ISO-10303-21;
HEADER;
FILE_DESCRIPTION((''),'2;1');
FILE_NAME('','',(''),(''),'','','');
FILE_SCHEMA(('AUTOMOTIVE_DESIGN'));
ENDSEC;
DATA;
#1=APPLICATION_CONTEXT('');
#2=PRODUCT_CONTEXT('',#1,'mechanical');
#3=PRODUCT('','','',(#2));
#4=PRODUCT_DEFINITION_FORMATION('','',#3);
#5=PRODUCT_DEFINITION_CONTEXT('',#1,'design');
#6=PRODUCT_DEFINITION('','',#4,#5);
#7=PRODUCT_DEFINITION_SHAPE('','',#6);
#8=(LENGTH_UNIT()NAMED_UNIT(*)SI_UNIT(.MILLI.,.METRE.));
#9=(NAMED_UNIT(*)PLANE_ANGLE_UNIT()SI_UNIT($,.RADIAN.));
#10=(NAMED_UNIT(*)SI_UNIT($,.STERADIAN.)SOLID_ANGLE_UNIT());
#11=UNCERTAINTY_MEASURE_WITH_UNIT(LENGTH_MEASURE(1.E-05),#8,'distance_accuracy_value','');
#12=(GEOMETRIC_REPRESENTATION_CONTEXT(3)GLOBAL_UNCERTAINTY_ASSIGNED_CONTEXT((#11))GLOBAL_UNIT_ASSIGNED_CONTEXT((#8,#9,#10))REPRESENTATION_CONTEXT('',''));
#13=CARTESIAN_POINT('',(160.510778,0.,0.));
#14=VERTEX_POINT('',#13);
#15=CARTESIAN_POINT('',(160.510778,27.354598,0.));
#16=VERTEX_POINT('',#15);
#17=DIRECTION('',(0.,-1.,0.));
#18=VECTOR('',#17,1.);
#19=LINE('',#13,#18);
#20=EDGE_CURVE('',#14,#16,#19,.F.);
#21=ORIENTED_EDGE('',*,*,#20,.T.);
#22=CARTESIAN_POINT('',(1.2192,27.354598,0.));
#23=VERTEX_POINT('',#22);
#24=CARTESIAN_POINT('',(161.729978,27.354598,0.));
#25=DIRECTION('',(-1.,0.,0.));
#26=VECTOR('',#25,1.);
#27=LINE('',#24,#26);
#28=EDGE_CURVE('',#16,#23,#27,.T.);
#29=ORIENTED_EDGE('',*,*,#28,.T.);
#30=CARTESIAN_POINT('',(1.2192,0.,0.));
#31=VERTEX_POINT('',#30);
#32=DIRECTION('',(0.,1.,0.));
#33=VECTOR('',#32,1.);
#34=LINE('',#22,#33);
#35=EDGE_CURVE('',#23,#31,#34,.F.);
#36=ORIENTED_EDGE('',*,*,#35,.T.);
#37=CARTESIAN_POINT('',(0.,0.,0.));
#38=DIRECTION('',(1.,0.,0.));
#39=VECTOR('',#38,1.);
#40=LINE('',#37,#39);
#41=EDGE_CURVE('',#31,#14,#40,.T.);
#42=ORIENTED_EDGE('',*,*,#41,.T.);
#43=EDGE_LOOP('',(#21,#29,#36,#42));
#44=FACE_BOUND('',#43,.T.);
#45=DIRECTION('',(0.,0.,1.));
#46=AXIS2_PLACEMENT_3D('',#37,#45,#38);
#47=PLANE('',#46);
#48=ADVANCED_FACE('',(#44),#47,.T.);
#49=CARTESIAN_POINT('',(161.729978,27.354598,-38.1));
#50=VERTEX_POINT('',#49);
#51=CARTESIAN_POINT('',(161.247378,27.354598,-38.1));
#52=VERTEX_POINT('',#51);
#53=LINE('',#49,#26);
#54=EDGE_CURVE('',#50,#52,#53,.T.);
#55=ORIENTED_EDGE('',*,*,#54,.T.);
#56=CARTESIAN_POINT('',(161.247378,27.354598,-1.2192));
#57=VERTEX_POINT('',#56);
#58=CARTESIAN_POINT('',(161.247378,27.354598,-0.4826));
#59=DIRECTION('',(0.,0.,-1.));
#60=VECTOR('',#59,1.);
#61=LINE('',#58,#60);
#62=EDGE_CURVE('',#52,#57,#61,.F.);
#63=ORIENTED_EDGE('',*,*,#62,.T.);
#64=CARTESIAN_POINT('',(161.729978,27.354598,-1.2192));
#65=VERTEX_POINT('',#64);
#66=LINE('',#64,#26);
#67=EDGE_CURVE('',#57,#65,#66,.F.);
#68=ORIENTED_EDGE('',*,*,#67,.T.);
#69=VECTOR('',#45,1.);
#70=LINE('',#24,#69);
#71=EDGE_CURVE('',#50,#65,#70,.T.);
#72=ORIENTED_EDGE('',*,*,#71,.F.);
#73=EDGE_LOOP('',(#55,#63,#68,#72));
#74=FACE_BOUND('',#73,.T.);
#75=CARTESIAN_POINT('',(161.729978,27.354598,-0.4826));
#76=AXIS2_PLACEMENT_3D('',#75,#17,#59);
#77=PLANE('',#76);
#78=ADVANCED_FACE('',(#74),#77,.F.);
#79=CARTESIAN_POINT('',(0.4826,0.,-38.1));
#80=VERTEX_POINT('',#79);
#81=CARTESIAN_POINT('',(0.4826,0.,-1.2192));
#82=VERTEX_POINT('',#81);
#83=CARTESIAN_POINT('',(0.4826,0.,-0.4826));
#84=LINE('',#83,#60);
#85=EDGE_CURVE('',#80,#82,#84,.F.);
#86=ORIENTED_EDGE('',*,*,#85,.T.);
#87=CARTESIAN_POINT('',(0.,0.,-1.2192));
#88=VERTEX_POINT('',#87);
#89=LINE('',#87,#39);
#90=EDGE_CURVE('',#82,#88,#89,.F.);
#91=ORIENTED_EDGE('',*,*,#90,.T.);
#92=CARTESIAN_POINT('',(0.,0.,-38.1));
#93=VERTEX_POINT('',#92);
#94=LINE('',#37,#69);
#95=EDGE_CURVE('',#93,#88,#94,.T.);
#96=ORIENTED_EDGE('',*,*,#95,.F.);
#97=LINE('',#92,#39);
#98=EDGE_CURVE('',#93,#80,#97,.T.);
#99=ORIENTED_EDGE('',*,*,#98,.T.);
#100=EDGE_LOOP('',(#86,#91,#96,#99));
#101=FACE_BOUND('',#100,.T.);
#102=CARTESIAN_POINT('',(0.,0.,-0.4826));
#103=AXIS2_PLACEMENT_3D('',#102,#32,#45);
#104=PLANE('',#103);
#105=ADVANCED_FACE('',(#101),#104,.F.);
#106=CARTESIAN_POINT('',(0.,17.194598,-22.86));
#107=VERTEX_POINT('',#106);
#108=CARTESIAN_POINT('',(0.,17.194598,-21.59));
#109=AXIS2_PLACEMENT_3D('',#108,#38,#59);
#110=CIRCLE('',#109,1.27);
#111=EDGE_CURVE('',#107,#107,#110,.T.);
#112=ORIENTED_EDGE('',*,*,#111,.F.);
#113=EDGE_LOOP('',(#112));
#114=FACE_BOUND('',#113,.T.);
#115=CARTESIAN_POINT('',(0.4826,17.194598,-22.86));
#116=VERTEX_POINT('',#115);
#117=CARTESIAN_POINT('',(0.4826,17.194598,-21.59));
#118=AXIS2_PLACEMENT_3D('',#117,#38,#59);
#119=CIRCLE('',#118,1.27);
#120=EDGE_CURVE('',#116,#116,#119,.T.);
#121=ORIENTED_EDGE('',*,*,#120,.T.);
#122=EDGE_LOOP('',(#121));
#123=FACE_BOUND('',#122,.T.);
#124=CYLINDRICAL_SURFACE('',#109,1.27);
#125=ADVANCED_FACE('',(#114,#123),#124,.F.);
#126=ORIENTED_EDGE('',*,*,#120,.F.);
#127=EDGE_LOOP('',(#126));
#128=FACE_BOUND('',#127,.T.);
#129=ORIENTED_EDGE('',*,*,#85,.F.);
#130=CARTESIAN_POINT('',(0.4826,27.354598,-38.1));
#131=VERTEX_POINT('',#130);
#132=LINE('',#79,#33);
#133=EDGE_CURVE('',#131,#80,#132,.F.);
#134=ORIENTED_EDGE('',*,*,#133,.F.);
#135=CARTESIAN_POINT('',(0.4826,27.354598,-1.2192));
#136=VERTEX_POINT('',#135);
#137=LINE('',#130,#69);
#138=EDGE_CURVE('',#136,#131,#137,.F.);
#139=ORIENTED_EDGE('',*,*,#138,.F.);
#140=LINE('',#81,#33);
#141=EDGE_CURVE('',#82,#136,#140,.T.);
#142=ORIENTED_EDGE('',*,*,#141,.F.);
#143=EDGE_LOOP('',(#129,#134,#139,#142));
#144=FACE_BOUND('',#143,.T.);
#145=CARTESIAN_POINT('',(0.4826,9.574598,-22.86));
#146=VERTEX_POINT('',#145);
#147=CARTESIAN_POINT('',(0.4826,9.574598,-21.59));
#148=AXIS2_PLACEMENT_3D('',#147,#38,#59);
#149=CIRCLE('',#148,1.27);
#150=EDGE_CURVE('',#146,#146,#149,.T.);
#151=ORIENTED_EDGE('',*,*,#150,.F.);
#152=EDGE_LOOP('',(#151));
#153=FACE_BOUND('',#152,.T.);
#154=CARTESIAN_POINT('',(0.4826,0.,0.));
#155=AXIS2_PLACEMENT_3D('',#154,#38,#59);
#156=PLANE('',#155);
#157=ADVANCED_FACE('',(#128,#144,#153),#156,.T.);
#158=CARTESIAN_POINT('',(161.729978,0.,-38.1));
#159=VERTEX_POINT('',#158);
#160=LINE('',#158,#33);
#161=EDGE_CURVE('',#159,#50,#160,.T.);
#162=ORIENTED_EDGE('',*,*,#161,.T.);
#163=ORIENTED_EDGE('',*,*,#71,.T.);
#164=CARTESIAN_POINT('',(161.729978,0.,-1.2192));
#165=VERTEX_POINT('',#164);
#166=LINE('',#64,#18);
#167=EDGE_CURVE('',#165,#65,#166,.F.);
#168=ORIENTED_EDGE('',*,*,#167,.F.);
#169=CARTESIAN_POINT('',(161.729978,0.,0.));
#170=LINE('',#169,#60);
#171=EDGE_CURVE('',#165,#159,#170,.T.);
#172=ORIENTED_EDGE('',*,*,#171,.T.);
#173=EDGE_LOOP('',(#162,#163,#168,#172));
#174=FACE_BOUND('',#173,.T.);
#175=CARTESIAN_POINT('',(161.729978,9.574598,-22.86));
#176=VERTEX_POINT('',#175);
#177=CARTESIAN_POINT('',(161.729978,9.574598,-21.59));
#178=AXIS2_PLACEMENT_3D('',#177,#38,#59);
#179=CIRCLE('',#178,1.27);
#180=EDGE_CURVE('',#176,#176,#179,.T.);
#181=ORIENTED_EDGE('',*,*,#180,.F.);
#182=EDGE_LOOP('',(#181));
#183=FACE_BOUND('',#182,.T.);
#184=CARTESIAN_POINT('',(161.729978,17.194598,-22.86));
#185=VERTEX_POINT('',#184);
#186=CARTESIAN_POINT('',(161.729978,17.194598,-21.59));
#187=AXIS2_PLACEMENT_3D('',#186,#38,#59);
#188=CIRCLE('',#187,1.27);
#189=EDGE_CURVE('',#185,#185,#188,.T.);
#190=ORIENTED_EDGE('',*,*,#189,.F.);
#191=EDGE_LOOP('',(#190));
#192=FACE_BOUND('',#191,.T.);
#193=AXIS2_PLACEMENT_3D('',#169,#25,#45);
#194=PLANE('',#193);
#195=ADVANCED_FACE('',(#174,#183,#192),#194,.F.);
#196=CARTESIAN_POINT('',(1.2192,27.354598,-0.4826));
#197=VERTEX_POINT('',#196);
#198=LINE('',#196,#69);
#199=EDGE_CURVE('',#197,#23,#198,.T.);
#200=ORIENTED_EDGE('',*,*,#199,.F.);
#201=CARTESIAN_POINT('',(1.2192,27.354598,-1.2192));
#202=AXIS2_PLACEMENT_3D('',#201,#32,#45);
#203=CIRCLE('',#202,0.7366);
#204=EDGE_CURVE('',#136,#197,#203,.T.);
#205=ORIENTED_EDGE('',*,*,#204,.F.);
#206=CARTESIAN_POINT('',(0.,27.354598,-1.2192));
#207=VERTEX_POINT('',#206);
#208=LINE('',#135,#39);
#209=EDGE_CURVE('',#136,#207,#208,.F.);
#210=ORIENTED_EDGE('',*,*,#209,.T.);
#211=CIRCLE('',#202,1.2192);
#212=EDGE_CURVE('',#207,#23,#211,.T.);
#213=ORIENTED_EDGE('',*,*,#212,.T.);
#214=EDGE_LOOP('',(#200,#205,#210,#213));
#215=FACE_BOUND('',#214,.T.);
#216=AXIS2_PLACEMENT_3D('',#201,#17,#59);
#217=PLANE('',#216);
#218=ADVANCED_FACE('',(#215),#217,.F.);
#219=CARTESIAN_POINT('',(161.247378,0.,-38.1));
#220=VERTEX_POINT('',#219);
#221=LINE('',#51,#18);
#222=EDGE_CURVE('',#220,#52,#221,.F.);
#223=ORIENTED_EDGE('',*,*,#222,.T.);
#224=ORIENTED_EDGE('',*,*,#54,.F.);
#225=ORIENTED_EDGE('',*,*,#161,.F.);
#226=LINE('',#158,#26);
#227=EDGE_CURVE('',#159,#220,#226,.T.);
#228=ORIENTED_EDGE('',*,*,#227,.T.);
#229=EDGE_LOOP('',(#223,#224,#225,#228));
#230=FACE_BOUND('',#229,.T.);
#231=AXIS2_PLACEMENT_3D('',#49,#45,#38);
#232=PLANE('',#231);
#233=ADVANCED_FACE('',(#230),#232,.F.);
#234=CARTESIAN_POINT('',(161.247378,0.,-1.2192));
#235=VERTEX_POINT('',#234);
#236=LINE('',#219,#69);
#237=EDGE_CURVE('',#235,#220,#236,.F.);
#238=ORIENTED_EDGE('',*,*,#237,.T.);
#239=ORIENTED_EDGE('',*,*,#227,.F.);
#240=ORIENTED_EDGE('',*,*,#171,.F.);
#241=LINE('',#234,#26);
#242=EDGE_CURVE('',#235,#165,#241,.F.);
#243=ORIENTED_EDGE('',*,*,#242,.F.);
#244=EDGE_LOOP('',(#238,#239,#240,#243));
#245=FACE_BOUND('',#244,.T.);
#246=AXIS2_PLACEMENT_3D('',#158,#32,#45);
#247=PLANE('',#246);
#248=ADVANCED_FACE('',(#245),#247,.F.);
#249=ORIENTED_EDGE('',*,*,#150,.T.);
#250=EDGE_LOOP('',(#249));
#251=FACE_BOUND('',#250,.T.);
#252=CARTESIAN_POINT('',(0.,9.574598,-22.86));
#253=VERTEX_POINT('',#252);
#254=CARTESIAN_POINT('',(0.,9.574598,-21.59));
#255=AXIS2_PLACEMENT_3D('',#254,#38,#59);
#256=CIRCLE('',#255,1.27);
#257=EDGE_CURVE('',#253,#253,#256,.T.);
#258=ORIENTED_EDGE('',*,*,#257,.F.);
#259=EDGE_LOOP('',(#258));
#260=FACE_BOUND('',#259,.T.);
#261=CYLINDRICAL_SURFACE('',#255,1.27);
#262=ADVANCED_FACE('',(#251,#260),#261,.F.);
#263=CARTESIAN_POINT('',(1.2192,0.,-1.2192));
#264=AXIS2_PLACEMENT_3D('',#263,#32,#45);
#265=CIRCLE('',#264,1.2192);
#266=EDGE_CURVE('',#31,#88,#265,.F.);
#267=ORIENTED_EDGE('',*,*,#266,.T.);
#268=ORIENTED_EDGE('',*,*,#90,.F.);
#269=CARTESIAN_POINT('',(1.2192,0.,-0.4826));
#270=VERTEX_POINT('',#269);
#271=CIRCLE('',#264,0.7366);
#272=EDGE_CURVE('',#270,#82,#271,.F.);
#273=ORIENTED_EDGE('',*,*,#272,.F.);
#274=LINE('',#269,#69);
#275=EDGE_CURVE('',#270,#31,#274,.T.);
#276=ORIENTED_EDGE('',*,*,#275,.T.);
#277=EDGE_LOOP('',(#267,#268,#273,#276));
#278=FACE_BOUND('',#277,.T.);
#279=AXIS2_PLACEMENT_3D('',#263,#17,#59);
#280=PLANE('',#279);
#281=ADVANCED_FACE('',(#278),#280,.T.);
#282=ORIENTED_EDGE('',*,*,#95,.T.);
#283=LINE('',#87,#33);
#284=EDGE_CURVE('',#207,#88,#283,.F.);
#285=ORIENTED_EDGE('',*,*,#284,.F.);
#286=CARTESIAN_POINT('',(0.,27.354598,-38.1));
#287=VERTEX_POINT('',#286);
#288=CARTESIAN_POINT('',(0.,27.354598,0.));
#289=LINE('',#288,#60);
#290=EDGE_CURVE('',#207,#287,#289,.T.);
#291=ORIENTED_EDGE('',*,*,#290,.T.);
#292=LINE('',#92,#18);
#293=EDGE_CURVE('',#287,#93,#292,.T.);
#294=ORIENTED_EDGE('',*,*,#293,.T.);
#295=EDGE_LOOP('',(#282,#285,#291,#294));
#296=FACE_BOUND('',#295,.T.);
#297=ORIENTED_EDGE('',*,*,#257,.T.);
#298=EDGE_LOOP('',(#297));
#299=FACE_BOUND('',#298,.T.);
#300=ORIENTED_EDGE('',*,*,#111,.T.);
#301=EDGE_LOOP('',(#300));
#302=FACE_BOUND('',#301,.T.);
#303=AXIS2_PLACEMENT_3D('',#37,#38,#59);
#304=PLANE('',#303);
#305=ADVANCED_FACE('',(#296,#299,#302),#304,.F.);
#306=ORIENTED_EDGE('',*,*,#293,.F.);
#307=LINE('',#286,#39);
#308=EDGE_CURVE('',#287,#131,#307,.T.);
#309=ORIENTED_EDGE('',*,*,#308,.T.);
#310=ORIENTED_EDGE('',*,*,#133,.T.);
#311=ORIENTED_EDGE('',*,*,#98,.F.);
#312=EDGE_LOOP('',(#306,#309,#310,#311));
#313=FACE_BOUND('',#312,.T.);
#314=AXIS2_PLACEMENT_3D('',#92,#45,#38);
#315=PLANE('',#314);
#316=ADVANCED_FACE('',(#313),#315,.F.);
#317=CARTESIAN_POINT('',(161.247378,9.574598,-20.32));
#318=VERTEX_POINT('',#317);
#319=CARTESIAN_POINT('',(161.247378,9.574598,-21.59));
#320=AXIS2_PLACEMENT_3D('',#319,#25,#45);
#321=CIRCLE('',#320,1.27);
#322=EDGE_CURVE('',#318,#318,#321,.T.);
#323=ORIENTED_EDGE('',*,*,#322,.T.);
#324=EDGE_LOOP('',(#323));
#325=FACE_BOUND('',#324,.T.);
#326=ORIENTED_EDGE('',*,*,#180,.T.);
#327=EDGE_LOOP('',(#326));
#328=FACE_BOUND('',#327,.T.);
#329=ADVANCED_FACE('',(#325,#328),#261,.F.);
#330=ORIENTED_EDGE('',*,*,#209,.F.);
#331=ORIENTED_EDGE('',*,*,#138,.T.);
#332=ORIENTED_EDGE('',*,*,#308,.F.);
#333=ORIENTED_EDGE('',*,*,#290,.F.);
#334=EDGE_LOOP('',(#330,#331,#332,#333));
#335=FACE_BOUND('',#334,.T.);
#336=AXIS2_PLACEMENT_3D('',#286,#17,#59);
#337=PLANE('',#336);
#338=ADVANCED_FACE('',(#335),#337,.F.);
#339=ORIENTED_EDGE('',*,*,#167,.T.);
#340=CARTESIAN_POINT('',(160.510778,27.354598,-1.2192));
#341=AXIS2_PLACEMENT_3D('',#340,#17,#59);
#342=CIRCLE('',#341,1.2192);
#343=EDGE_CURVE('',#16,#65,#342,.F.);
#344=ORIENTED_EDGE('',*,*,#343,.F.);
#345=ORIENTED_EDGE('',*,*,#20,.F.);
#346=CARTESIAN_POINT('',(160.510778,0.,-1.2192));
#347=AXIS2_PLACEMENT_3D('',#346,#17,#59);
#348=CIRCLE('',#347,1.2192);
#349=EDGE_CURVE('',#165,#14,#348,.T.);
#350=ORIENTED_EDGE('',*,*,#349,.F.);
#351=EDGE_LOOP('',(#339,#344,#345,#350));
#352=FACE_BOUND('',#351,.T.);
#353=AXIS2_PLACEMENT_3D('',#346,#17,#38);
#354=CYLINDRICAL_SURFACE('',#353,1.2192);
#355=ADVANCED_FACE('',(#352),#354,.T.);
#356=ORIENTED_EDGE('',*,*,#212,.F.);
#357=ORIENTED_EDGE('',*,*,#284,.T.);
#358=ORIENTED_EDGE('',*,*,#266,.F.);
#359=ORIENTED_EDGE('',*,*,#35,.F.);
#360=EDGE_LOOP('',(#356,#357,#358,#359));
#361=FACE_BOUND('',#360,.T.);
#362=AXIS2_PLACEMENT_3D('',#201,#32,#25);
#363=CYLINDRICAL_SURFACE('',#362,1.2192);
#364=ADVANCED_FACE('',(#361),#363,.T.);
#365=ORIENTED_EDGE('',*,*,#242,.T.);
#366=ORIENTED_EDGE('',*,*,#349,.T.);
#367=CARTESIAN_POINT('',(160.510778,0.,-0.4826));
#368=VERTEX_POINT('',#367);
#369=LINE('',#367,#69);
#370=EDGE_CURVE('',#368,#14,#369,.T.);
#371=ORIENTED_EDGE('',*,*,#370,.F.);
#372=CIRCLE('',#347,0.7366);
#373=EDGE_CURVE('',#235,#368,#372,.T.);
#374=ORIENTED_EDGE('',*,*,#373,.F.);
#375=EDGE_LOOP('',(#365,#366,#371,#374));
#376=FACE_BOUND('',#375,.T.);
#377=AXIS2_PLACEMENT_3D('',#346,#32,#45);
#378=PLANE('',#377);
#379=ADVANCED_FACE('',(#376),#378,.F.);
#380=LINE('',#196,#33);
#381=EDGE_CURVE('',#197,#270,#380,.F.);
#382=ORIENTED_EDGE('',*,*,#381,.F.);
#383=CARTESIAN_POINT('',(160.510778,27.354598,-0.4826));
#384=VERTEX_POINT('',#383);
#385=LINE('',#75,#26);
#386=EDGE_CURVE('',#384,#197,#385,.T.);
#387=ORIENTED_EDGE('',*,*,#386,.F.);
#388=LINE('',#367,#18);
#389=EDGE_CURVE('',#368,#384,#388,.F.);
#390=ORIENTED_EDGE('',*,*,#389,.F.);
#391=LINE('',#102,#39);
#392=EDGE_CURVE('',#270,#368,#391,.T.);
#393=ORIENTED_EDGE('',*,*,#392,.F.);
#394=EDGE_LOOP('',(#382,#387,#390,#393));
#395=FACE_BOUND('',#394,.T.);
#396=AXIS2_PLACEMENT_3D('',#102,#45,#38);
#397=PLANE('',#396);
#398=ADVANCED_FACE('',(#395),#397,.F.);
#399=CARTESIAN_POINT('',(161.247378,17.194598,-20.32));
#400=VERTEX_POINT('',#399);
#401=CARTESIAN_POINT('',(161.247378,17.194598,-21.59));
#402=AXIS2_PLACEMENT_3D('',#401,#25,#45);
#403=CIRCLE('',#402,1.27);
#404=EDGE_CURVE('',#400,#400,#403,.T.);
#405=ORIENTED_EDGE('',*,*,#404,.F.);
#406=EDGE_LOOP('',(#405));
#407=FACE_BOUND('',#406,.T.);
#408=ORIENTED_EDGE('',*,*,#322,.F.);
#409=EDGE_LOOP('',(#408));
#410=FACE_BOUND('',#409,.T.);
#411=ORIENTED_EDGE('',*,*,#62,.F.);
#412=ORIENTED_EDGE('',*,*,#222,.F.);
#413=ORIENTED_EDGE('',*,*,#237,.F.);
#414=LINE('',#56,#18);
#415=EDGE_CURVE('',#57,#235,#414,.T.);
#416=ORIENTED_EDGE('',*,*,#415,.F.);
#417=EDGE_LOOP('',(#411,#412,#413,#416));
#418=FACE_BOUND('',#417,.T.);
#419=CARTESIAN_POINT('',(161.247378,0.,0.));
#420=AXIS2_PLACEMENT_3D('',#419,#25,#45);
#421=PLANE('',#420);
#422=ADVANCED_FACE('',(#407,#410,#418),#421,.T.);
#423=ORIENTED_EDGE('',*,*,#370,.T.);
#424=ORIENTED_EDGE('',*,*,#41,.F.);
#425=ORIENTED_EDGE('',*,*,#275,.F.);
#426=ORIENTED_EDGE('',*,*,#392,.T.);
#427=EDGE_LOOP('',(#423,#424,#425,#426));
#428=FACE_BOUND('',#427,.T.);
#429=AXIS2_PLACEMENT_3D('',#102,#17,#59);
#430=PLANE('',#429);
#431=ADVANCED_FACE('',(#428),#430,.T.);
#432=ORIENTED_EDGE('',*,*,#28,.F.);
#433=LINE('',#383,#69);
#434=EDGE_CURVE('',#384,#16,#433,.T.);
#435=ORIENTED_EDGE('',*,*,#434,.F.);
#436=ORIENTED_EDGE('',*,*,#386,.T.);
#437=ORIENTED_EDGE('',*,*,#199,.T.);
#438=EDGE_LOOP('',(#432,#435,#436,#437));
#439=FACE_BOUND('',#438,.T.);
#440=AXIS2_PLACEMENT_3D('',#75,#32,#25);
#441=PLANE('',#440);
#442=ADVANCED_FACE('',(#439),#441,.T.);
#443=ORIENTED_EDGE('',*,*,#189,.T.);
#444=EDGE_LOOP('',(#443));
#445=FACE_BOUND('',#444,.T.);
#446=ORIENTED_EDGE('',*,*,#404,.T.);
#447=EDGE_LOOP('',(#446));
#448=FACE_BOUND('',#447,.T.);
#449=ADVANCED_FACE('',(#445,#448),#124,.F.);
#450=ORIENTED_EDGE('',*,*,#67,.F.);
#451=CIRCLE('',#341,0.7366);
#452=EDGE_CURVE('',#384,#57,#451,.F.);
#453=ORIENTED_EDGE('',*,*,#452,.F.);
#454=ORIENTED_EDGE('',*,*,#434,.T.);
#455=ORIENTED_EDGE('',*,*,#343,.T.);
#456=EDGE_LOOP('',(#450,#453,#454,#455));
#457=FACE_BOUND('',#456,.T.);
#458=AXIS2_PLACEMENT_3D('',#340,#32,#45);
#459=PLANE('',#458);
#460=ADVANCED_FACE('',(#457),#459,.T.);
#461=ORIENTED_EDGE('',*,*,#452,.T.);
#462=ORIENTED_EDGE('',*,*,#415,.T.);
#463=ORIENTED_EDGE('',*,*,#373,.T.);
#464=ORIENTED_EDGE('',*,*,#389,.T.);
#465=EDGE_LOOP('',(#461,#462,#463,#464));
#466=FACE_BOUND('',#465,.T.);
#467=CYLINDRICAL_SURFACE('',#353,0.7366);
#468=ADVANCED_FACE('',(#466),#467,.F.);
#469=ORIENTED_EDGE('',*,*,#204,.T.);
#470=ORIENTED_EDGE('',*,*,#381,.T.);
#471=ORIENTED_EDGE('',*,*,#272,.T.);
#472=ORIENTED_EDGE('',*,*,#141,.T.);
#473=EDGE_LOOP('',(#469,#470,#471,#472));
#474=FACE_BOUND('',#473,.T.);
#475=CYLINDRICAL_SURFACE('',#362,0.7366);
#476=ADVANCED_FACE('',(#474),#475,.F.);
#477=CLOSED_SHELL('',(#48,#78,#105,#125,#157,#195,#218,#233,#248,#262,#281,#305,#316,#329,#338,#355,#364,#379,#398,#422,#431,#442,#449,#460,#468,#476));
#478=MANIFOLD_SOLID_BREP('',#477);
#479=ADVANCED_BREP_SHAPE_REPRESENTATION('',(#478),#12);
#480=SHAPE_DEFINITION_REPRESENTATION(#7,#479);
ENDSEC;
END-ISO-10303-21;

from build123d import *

# Parameters (mm, degrees)
SKETCH1_W                    = 161.729977966
SKETCH1_H                    = 27.354597718
BASE_FLANGE1_DEPTH           = 0.4826
EDGE_FLANGE1_STRIP_W         = 3.4036
EDGE_FLANGE1_STRIP_H         = 0.4826
EDGE_FLANGE1_STRIP_CUT_DEPTH = 27.354597718
EDGE_FLANGE1_DEPTH           = 27.354597718
EDGE_FLANGE2_STRIP_W         = 3.4036
EDGE_FLANGE2_STRIP_H         = 0.4826
EDGE_FLANGE2_STRIP_CUT_DEPTH = 27.354597718
EDGE_FLANGE2_DEPTH           = 27.354597718
SKETCH12_R                   = 1.27
CUT_EXTRUDE1_DEPTH           = 169.393793797


# Sheet-metal steps are written as plain solids
with BuildPart() as part:
    # Sketch1 → Base-Flange1 (new body)
    with BuildSketch(Plane.XY):
        with Locations((80.864988983, 13.677298859)):
            Rectangle(SKETCH1_W, SKETCH1_H)
    extrude(amount=-BASE_FLANGE1_DEPTH)

    # Edge-Flange1 strip (across the edge) → Edge-Flange1 strip cut (cut)
    with BuildSketch(Plane(origin=(161.729977966, 27.354597718, -0.4826), x_dir=(-1, 0, 0), z_dir=(0, -1, 0))):
        with Locations((-0.4826, -0.2413)):
            Rectangle(EDGE_FLANGE1_STRIP_W, EDGE_FLANGE1_STRIP_H)
    extrude(amount=EDGE_FLANGE1_STRIP_CUT_DEPTH, mode=Mode.SUBTRACT)

    # Edge-Flange1 section (across the edge) → Edge-Flange1 (add)
    with BuildSketch(Plane(origin=(161.729977966, 27.354597718, -0.4826), x_dir=(-1, 0, 0), z_dir=(0, -1, 0))):
        with BuildLine():
            Line((0, 0.7366), (0, 37.6174))
            Line((0, 37.6174), (0.4826, 37.6174))
            Line((0.4826, 37.6174), (0.4826, 0.7366))
            ThreePointArc((0.4826, 0.7366), (0.698345145, 0.215745145), (1.2192, 0))
            Line((1.2192, 0), (1.2192, -0.4826))
            ThreePointArc((1.2192, -0.4826), (0.357095412, -0.125504588), (0, 0.7366))
        make_face()
    extrude(amount=EDGE_FLANGE1_DEPTH)

    # Edge-Flange2 strip (across the edge) → Edge-Flange2 strip cut (cut)
    with BuildSketch(Plane(origin=(0, 0, -0.4826), x_dir=(1, 0, 0), z_dir=(0, 1, 0))):
        with Locations((-0.4826, -0.2413)):
            Rectangle(EDGE_FLANGE2_STRIP_W, EDGE_FLANGE2_STRIP_H)
    extrude(amount=EDGE_FLANGE2_STRIP_CUT_DEPTH, mode=Mode.SUBTRACT)

    # Edge-Flange2 section (across the edge) → Edge-Flange2 (add)
    with BuildSketch(Plane(origin=(0, 0, -0.4826), x_dir=(1, 0, 0), z_dir=(0, 1, 0))):
        with BuildLine():
            Line((0, 0.7366), (0, 37.6174))
            Line((0, 37.6174), (0.4826, 37.6174))
            Line((0.4826, 37.6174), (0.4826, 0.7366))
            ThreePointArc((0.4826, 0.7366), (0.698345145, 0.215745145), (1.2192, 0))
            Line((1.2192, 0), (1.2192, -0.4826))
            ThreePointArc((1.2192, -0.4826), (0.357095412, -0.125504588), (0, 0.7366))
        make_face()
    extrude(amount=EDGE_FLANGE2_DEPTH)

    # Sketch12 → Cut-Extrude1 (cut, through all)
    with BuildSketch(Plane(origin=(161.729977966, 0, 0), x_dir=(0, 0, -1), z_dir=(1, 0, 0))):
        with Locations((21.59, 17.194597718)):
            Circle(SKETCH12_R)
        with Locations((21.59, 9.574597718)):
            Circle(SKETCH12_R)
    extrude(amount=-CUT_EXTRUDE1_DEPTH, mode=Mode.SUBTRACT)


solid = part.part
